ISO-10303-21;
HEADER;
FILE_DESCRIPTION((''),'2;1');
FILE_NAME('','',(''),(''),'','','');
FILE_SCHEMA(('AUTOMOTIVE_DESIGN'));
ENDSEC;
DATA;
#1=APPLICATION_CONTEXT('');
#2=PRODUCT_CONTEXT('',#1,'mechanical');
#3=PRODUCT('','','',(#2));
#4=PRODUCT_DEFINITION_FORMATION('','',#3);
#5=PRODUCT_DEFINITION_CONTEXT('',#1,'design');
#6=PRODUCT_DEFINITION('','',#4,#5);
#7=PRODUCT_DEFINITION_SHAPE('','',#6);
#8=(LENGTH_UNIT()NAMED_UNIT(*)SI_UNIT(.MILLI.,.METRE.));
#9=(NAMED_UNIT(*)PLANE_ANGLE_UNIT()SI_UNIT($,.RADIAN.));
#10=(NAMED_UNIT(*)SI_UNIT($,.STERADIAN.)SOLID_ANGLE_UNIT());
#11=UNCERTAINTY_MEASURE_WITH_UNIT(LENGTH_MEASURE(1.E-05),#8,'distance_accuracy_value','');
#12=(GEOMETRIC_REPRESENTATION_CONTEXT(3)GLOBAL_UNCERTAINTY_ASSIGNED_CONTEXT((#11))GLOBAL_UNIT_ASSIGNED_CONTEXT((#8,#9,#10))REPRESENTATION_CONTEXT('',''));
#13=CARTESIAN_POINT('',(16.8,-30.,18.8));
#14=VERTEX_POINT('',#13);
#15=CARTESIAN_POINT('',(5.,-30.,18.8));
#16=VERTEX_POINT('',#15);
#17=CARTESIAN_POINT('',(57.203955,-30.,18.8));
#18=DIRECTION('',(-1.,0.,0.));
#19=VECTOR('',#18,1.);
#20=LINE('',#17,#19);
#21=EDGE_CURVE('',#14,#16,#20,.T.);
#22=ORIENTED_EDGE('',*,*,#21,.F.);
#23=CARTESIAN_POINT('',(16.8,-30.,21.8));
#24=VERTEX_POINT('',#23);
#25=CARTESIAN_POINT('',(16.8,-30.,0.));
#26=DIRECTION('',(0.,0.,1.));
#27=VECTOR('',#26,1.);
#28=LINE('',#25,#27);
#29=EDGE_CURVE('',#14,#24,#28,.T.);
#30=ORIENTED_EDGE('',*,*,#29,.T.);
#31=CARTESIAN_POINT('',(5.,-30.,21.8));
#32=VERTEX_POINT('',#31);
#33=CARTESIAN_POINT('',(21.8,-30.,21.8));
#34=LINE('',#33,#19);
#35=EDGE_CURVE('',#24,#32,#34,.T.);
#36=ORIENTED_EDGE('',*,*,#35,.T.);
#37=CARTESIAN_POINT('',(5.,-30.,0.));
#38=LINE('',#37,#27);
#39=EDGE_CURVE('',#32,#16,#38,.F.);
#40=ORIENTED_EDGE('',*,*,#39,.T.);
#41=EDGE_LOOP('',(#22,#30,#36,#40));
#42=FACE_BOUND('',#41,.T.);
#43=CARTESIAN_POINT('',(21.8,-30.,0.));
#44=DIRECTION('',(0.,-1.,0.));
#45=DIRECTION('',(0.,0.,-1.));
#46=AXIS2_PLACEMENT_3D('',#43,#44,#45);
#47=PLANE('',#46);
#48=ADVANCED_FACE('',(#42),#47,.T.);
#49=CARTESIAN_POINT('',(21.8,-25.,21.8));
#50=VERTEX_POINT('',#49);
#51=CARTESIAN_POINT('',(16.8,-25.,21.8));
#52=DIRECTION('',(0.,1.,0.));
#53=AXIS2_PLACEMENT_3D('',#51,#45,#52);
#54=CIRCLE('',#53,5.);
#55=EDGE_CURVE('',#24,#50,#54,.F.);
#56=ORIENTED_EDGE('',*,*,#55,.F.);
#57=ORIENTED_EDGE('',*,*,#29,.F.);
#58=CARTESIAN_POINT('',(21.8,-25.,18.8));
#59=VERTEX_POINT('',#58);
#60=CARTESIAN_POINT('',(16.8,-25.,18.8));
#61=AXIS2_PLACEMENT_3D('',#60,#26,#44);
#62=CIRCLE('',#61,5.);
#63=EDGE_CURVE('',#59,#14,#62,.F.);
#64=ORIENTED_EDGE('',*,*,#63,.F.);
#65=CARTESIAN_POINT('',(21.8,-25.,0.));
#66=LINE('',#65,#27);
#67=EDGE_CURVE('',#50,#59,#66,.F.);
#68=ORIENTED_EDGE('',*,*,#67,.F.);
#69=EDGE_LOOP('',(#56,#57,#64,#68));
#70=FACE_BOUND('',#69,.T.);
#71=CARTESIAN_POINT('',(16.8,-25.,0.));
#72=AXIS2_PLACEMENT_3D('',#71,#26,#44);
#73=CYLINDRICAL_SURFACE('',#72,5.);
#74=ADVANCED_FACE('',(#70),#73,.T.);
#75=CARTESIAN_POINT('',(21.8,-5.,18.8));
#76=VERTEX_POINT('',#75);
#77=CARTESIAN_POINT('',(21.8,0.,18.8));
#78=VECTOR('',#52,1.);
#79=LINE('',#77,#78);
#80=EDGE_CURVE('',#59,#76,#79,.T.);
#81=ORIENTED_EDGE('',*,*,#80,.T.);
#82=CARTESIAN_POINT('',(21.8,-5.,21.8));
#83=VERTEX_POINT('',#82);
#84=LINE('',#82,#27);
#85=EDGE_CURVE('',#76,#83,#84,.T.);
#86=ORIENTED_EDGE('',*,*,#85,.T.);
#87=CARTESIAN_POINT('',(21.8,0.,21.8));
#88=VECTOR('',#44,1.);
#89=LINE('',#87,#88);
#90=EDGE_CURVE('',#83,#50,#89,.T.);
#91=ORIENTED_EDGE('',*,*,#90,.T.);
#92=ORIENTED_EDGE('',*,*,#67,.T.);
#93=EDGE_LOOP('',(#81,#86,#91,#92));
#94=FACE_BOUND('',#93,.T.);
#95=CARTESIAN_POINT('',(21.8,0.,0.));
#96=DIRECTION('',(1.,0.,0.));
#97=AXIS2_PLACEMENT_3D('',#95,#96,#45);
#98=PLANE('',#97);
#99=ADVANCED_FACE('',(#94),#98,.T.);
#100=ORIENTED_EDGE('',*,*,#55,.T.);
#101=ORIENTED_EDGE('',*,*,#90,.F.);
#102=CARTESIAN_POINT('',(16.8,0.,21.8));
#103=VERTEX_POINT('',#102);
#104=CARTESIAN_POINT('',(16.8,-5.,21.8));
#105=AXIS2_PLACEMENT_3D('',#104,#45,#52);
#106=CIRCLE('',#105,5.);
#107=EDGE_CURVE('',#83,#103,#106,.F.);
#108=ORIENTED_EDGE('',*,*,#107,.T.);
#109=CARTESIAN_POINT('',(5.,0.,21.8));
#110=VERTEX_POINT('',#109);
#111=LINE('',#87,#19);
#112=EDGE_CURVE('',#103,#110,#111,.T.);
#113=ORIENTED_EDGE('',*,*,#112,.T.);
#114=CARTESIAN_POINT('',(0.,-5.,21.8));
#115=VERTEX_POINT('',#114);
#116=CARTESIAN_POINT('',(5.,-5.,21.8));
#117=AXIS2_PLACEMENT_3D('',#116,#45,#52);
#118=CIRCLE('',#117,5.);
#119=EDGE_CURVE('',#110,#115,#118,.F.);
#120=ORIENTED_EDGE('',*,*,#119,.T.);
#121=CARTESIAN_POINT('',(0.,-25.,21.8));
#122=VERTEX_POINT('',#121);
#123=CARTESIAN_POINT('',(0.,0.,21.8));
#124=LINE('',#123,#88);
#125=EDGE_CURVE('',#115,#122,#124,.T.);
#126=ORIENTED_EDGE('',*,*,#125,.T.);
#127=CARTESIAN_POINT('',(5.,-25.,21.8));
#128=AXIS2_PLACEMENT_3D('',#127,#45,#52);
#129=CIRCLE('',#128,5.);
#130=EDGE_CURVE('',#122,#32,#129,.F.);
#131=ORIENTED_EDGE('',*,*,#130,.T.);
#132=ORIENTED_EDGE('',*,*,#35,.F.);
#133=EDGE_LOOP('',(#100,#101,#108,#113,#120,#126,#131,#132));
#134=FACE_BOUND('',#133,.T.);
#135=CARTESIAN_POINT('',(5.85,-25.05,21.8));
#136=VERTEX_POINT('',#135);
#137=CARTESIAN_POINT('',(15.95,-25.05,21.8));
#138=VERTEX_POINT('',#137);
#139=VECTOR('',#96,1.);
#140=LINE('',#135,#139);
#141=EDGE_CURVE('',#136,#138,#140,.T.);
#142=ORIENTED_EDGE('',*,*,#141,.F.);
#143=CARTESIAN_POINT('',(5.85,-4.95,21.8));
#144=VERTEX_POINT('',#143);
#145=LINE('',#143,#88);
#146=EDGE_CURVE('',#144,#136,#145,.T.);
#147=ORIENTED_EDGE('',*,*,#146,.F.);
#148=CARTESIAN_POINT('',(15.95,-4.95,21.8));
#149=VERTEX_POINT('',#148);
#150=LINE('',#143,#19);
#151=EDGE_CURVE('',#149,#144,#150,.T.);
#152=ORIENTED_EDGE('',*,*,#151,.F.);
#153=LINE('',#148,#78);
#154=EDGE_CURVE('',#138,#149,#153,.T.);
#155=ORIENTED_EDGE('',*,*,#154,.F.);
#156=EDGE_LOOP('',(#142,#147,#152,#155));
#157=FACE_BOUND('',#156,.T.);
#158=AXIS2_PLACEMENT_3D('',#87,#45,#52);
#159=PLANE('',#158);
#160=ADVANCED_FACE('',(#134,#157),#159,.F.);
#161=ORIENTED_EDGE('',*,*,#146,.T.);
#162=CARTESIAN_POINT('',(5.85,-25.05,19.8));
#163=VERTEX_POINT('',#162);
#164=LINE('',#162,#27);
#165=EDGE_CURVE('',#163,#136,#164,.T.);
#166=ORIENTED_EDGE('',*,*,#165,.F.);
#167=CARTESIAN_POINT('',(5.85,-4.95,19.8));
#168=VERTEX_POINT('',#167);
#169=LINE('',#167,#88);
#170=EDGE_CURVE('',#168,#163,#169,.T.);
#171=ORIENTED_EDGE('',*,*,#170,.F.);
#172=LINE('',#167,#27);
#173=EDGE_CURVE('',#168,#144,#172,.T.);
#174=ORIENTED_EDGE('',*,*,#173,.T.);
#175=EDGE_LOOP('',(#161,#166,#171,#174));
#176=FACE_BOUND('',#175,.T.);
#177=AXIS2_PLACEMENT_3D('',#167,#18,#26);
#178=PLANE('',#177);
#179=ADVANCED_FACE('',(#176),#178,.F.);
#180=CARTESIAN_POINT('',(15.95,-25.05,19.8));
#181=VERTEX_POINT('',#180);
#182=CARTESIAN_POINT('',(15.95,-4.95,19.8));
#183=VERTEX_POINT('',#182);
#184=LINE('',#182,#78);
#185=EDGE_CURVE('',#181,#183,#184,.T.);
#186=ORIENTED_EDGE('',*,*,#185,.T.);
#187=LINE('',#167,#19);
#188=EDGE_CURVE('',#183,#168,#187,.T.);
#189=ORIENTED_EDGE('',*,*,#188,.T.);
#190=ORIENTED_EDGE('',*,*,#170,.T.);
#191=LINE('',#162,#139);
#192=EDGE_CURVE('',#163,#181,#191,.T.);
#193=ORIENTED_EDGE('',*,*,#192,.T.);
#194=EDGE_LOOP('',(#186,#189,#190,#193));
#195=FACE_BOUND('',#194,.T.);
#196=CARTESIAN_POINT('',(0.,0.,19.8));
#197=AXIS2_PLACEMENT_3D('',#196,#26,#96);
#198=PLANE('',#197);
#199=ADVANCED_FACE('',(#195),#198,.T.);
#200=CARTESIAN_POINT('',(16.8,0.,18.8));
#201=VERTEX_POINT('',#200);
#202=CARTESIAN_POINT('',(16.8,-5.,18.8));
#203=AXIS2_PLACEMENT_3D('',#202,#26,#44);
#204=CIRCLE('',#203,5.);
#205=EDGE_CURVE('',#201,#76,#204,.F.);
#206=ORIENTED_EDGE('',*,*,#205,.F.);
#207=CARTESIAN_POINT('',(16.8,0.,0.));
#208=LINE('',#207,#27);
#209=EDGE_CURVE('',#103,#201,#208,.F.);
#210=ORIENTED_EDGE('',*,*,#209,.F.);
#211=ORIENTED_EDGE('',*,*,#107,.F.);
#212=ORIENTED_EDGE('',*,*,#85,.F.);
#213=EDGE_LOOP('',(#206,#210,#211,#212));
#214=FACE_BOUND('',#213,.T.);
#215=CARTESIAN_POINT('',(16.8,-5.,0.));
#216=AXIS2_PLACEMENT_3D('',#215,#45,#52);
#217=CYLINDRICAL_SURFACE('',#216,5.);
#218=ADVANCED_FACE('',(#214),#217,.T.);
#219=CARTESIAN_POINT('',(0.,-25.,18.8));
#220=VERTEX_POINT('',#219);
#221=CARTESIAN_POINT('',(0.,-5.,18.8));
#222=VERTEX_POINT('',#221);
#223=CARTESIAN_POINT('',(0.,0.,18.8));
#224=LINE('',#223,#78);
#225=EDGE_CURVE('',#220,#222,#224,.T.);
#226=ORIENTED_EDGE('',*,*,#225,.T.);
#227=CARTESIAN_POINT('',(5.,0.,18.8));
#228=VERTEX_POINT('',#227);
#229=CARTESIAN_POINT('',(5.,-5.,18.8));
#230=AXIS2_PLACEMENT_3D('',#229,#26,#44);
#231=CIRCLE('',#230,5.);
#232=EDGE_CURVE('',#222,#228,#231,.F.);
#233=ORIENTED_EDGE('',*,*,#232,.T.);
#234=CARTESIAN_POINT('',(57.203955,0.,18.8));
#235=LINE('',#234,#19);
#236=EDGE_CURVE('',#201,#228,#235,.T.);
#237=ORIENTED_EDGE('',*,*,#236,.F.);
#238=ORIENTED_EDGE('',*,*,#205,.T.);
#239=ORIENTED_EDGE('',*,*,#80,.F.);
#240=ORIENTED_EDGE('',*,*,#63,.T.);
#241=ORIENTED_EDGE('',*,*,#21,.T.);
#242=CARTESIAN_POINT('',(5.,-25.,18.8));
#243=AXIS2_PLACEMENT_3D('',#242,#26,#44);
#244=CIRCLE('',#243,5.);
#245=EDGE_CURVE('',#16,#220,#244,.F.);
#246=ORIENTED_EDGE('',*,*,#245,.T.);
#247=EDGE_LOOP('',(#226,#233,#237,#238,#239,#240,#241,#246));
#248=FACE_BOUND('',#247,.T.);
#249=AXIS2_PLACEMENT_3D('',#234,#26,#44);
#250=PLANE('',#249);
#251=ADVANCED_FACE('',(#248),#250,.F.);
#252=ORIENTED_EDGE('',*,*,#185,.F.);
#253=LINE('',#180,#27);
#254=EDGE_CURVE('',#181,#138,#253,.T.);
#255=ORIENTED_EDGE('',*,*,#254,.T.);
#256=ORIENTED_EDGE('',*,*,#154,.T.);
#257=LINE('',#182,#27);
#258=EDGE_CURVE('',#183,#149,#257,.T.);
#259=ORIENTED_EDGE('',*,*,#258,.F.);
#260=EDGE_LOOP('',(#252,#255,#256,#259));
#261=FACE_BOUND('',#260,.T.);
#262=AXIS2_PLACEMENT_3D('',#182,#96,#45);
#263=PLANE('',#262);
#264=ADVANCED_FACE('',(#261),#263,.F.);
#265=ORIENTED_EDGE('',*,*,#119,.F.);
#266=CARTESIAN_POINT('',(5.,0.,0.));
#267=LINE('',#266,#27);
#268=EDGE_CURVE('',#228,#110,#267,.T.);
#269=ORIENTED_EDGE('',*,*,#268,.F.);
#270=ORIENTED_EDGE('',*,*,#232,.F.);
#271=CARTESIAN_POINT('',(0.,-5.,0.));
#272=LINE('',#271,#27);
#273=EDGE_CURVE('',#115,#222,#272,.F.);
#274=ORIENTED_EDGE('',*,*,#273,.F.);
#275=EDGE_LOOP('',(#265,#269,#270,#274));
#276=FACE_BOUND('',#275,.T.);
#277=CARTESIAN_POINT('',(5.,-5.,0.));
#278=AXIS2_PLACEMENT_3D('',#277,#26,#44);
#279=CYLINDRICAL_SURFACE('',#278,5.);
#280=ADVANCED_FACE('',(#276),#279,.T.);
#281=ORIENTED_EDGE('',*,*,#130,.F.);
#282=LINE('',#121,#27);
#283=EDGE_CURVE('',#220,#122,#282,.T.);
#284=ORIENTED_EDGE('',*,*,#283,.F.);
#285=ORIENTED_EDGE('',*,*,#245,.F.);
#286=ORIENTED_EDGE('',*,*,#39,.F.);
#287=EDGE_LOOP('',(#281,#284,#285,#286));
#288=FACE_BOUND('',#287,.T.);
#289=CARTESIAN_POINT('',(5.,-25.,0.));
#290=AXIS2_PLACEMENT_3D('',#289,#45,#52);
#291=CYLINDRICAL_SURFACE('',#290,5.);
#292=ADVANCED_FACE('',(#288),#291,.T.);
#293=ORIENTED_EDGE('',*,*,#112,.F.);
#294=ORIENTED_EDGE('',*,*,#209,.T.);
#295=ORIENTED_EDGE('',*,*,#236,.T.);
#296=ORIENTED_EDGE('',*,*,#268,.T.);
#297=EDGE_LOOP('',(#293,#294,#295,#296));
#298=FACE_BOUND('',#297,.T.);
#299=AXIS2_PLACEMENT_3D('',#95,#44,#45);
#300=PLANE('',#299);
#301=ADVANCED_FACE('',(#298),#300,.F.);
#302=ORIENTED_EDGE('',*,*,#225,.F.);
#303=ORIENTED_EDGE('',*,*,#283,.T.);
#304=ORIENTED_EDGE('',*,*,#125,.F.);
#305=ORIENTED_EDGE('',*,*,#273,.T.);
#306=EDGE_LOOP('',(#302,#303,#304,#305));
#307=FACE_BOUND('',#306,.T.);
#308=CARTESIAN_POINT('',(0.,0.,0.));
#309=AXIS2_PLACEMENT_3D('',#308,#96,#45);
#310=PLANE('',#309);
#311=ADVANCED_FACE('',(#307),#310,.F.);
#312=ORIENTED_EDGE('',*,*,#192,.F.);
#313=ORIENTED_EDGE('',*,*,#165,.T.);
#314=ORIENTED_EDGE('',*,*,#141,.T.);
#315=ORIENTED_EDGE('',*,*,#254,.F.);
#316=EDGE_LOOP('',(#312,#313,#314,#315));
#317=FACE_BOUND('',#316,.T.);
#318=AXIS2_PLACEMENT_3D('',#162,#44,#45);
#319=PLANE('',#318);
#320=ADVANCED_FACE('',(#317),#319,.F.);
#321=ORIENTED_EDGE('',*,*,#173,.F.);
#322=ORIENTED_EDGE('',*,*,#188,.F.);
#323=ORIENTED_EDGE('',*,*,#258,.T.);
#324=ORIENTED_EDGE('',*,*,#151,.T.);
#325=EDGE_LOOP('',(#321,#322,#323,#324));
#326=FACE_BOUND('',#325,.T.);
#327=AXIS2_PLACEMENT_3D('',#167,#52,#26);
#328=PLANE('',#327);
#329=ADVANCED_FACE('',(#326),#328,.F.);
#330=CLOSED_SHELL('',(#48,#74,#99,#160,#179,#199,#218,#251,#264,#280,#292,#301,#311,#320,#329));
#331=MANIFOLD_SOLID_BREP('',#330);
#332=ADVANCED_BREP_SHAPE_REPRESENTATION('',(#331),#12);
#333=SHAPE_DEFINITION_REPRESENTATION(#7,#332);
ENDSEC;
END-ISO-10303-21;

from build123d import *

# Parameters (mm, degrees)
CROQUIS1_W                        = 21.8
CROQUIS1_H                        = 30
SALIENTE_EXTRUIR1_DEPTH           = 21.8
CROQUIS6_R                        = 2
CORTAR_EXTRUIR2_DEPTH             = 21.8
CORTAR_EXTRUIR4_REACH             = 45.017
CROQUIS11_R                       = 3.5
CROQUIS11_W                       = 3.4
CROQUIS11_H                       = 8.4
CORTAR_EXTRUIR4_DIRECTION_2_DEPTH = 3.5
REDONDEO1_R                       = 5
CROQUIS13_R                       = 3.5
CORTAR_EXTRUIR6_DEPTH             = 3.5
CROQUIS16_W                       = 10.1
CROQUIS16_H                       = 20.1
CORTAR_EXTRUIR7_DEPTH             = 2
CROQUIS17_W                       = 10.1
CROQUIS17_H                       = 20.1
CORTAR_EXTRUIR8_DEPTH             = 2.1
CORTAR_EXTRUIR9_START             = -3.5
CROQUIS7_R                        = 3.5
CORTAR_EXTRUIR9_DEPTH             = 3.5
CORTAR_EXTRUIR10_REACH            = 45.017
CROQUIS18_W                       = 18.8
CROQUIS18_H                       = 30


with BuildPart() as part:
    # Croquis1 → Saliente-Extruir1 (new body)
    with BuildSketch(Plane(origin=(0, 0, 0), x_dir=(0, 0, -1), z_dir=(1, 0, 0))):
        with Locations((-10.9, -15)):
            Rectangle(CROQUIS1_W, CROQUIS1_H)
    extrude(amount=SALIENTE_EXTRUIR1_DEPTH)

    # Croquis6 → Cortar-Extruir2 (cut)
    with BuildSketch(Plane.ZY):
        with Locations((10.9, -22)):
            Circle(CROQUIS6_R)
        with Locations((10.9, -7)):
            Circle(CROQUIS6_R)
    extrude(amount=-CORTAR_EXTRUIR2_DEPTH, mode=Mode.SUBTRACT)

    # Cortar-Extruir4: up to this face of the body (flat: up to its plane)
    cortar_extruir4_end = Plane(part.part.faces().sort_by_distance((10.9, 0, 10.9))[0])
    # Croquis11 → Cortar-Extruir4 (cut, up to the picked face)
    with BuildSketch(Plane.XZ.offset(30), mode=Mode.PRIVATE) as cortar_extruir4_sk1:
        with Locations(Location((13.4, 10.9, 0), (0, 0, 270))):
            Circle(CROQUIS11_R)
    cortar_extruir4_tool1 = split(extrude(cortar_extruir4_sk1.sketch, amount=-CORTAR_EXTRUIR4_REACH, mode=Mode.PRIVATE), bisect_by=cortar_extruir4_end, keep=Keep.BOTH, mode=Mode.PRIVATE)
    # Croquis11 → Cortar-Extruir4 (cut, up to the picked face)
    with BuildSketch(Plane.XZ.offset(30), mode=Mode.PRIVATE) as cortar_extruir4_sk2:
        with Locations((7.2, 10.9)):
            Rectangle(CROQUIS11_W, CROQUIS11_H)
    cortar_extruir4_tool2 = split(extrude(cortar_extruir4_sk2.sketch, amount=-CORTAR_EXTRUIR4_REACH, mode=Mode.PRIVATE), bisect_by=cortar_extruir4_end, keep=Keep.BOTH, mode=Mode.PRIVATE)
    add(cortar_extruir4_tool1.solids().sort_by(Axis((13.4, -30, 10.9), (0, 1, 0)))[0], mode=Mode.SUBTRACT)
    add(cortar_extruir4_tool2.solids().sort_by(Axis((7.2, -30, 10.9), (0, 1, 0)))[0], mode=Mode.SUBTRACT)

    # Croquis11 → Cortar-Extruir4 direction 2 (cut)
    with BuildSketch(Plane.XZ.offset(30)):
        with Locations(Location((13.4, 10.9, 0), (0, 0, 270))):
            Circle(CROQUIS11_R)
        with Locations((7.2, 10.9)):
            Rectangle(CROQUIS11_W, CROQUIS11_H)
    extrude(amount=CORTAR_EXTRUIR4_DIRECTION_2_DEPTH, mode=Mode.SUBTRACT)

    # Redondeo1
    # the kernel refuses this fillet: 5 mm, written as the material it takes off along each edge
    with BuildSketch(Plane(origin=(21.8, -30, 34.3), x_dir=(0, 1, 0), z_dir=(0, 0, -1)), Plane(origin=(0, 0, -12.5), x_dir=(1, 0, 0), z_dir=(0, 0, 1))) as redondeo1_piece_1:
        with BuildLine():
            CenterArc((REDONDEO1_R, -REDONDEO1_R), REDONDEO1_R, 90, 90)
            Line((0, -REDONDEO1_R), (0, 0))
            Line((0, 0), (REDONDEO1_R, 0))
        make_face()
    extrude(amount=46.8, mode=Mode.SUBTRACT)
    with BuildSketch(Plane(origin=(21.8, 0, -12.5), x_dir=(-1, 0, 0), z_dir=(0, 0, 1)), Plane(origin=(0, -30, 34.3), x_dir=(0, 1, 0), z_dir=(0, 0, -1))) as redondeo1_piece_2:
        with BuildLine():
            CenterArc((REDONDEO1_R, REDONDEO1_R), REDONDEO1_R, 180, 90)
            Line((0, REDONDEO1_R), (0, 0))
            Line((0, 0), (REDONDEO1_R, 0))
        make_face()
    extrude(amount=46.8, mode=Mode.SUBTRACT)

    # Croquis13 → Cortar-Extruir6 (cut)
    with BuildSketch(Plane.ZY):
        with Locations((10.9, -7)):
            Circle(CROQUIS13_R)
        with Locations(Location((10.9, -22, 0), (0, 0, 301.002719134))):
            Circle(CROQUIS13_R)
    extrude(amount=-CORTAR_EXTRUIR6_DEPTH, mode=Mode.SUBTRACT)

    # Croquis16 → Cortar-Extruir7 (cut)
    with BuildSketch(Plane.XY.offset(21.8)):
        with Locations((10.9, -15)):
            Rectangle(CROQUIS16_W, CROQUIS16_H)
    extrude(amount=-CORTAR_EXTRUIR7_DEPTH, mode=Mode.SUBTRACT)

    # Croquis17 → Cortar-Extruir8 (cut)
    with BuildSketch(Plane(origin=(0, 0, 0), x_dir=(-1, 0, 0), z_dir=(0, 0, -1))):
        with Locations((-10.9, -15)):
            Rectangle(CROQUIS17_W, CROQUIS17_H)
    extrude(amount=-CORTAR_EXTRUIR8_DEPTH, mode=Mode.SUBTRACT)

    # Croquis7 → Cortar-Extruir9 (cut)
    with BuildSketch(Plane(origin=(21.8, 0, 0), x_dir=(0, 0, -1), z_dir=(1, 0, 0)).offset(CORTAR_EXTRUIR9_START)):
        with Locations(Location((-10.9, -22, 0), (0, 0, 238.997280866))):
            Circle(CROQUIS7_R)
        with Locations(Location((-10.9, -7, 0), (0, 0, 180))):
            Circle(CROQUIS7_R)
    extrude(amount=CORTAR_EXTRUIR9_DEPTH, mode=Mode.SUBTRACT)

    # Cortar-Extruir10: up to this face of the body (flat: up to its plane)
    cortar_extruir10_end = Plane(part.part.faces().sort_by_distance((21.8, -14.963855914, 10.9))[0])
    # Croquis18 → Cortar-Extruir10 (cut, up to the picked face)
    with BuildSketch(Plane.ZY, mode=Mode.PRIVATE) as cortar_extruir10_sk1:
        with Locations((9.4, -15)):
            Rectangle(CROQUIS18_W, CROQUIS18_H)
    cortar_extruir10_tool1 = split(extrude(cortar_extruir10_sk1.sketch, amount=-CORTAR_EXTRUIR10_REACH, mode=Mode.PRIVATE), bisect_by=cortar_extruir10_end, keep=Keep.BOTH, mode=Mode.PRIVATE)
    add(cortar_extruir10_tool1.solids().sort_by(Axis((0, -15, 9.4), (1, 0, 0)))[0], mode=Mode.SUBTRACT)


solid = part.part
